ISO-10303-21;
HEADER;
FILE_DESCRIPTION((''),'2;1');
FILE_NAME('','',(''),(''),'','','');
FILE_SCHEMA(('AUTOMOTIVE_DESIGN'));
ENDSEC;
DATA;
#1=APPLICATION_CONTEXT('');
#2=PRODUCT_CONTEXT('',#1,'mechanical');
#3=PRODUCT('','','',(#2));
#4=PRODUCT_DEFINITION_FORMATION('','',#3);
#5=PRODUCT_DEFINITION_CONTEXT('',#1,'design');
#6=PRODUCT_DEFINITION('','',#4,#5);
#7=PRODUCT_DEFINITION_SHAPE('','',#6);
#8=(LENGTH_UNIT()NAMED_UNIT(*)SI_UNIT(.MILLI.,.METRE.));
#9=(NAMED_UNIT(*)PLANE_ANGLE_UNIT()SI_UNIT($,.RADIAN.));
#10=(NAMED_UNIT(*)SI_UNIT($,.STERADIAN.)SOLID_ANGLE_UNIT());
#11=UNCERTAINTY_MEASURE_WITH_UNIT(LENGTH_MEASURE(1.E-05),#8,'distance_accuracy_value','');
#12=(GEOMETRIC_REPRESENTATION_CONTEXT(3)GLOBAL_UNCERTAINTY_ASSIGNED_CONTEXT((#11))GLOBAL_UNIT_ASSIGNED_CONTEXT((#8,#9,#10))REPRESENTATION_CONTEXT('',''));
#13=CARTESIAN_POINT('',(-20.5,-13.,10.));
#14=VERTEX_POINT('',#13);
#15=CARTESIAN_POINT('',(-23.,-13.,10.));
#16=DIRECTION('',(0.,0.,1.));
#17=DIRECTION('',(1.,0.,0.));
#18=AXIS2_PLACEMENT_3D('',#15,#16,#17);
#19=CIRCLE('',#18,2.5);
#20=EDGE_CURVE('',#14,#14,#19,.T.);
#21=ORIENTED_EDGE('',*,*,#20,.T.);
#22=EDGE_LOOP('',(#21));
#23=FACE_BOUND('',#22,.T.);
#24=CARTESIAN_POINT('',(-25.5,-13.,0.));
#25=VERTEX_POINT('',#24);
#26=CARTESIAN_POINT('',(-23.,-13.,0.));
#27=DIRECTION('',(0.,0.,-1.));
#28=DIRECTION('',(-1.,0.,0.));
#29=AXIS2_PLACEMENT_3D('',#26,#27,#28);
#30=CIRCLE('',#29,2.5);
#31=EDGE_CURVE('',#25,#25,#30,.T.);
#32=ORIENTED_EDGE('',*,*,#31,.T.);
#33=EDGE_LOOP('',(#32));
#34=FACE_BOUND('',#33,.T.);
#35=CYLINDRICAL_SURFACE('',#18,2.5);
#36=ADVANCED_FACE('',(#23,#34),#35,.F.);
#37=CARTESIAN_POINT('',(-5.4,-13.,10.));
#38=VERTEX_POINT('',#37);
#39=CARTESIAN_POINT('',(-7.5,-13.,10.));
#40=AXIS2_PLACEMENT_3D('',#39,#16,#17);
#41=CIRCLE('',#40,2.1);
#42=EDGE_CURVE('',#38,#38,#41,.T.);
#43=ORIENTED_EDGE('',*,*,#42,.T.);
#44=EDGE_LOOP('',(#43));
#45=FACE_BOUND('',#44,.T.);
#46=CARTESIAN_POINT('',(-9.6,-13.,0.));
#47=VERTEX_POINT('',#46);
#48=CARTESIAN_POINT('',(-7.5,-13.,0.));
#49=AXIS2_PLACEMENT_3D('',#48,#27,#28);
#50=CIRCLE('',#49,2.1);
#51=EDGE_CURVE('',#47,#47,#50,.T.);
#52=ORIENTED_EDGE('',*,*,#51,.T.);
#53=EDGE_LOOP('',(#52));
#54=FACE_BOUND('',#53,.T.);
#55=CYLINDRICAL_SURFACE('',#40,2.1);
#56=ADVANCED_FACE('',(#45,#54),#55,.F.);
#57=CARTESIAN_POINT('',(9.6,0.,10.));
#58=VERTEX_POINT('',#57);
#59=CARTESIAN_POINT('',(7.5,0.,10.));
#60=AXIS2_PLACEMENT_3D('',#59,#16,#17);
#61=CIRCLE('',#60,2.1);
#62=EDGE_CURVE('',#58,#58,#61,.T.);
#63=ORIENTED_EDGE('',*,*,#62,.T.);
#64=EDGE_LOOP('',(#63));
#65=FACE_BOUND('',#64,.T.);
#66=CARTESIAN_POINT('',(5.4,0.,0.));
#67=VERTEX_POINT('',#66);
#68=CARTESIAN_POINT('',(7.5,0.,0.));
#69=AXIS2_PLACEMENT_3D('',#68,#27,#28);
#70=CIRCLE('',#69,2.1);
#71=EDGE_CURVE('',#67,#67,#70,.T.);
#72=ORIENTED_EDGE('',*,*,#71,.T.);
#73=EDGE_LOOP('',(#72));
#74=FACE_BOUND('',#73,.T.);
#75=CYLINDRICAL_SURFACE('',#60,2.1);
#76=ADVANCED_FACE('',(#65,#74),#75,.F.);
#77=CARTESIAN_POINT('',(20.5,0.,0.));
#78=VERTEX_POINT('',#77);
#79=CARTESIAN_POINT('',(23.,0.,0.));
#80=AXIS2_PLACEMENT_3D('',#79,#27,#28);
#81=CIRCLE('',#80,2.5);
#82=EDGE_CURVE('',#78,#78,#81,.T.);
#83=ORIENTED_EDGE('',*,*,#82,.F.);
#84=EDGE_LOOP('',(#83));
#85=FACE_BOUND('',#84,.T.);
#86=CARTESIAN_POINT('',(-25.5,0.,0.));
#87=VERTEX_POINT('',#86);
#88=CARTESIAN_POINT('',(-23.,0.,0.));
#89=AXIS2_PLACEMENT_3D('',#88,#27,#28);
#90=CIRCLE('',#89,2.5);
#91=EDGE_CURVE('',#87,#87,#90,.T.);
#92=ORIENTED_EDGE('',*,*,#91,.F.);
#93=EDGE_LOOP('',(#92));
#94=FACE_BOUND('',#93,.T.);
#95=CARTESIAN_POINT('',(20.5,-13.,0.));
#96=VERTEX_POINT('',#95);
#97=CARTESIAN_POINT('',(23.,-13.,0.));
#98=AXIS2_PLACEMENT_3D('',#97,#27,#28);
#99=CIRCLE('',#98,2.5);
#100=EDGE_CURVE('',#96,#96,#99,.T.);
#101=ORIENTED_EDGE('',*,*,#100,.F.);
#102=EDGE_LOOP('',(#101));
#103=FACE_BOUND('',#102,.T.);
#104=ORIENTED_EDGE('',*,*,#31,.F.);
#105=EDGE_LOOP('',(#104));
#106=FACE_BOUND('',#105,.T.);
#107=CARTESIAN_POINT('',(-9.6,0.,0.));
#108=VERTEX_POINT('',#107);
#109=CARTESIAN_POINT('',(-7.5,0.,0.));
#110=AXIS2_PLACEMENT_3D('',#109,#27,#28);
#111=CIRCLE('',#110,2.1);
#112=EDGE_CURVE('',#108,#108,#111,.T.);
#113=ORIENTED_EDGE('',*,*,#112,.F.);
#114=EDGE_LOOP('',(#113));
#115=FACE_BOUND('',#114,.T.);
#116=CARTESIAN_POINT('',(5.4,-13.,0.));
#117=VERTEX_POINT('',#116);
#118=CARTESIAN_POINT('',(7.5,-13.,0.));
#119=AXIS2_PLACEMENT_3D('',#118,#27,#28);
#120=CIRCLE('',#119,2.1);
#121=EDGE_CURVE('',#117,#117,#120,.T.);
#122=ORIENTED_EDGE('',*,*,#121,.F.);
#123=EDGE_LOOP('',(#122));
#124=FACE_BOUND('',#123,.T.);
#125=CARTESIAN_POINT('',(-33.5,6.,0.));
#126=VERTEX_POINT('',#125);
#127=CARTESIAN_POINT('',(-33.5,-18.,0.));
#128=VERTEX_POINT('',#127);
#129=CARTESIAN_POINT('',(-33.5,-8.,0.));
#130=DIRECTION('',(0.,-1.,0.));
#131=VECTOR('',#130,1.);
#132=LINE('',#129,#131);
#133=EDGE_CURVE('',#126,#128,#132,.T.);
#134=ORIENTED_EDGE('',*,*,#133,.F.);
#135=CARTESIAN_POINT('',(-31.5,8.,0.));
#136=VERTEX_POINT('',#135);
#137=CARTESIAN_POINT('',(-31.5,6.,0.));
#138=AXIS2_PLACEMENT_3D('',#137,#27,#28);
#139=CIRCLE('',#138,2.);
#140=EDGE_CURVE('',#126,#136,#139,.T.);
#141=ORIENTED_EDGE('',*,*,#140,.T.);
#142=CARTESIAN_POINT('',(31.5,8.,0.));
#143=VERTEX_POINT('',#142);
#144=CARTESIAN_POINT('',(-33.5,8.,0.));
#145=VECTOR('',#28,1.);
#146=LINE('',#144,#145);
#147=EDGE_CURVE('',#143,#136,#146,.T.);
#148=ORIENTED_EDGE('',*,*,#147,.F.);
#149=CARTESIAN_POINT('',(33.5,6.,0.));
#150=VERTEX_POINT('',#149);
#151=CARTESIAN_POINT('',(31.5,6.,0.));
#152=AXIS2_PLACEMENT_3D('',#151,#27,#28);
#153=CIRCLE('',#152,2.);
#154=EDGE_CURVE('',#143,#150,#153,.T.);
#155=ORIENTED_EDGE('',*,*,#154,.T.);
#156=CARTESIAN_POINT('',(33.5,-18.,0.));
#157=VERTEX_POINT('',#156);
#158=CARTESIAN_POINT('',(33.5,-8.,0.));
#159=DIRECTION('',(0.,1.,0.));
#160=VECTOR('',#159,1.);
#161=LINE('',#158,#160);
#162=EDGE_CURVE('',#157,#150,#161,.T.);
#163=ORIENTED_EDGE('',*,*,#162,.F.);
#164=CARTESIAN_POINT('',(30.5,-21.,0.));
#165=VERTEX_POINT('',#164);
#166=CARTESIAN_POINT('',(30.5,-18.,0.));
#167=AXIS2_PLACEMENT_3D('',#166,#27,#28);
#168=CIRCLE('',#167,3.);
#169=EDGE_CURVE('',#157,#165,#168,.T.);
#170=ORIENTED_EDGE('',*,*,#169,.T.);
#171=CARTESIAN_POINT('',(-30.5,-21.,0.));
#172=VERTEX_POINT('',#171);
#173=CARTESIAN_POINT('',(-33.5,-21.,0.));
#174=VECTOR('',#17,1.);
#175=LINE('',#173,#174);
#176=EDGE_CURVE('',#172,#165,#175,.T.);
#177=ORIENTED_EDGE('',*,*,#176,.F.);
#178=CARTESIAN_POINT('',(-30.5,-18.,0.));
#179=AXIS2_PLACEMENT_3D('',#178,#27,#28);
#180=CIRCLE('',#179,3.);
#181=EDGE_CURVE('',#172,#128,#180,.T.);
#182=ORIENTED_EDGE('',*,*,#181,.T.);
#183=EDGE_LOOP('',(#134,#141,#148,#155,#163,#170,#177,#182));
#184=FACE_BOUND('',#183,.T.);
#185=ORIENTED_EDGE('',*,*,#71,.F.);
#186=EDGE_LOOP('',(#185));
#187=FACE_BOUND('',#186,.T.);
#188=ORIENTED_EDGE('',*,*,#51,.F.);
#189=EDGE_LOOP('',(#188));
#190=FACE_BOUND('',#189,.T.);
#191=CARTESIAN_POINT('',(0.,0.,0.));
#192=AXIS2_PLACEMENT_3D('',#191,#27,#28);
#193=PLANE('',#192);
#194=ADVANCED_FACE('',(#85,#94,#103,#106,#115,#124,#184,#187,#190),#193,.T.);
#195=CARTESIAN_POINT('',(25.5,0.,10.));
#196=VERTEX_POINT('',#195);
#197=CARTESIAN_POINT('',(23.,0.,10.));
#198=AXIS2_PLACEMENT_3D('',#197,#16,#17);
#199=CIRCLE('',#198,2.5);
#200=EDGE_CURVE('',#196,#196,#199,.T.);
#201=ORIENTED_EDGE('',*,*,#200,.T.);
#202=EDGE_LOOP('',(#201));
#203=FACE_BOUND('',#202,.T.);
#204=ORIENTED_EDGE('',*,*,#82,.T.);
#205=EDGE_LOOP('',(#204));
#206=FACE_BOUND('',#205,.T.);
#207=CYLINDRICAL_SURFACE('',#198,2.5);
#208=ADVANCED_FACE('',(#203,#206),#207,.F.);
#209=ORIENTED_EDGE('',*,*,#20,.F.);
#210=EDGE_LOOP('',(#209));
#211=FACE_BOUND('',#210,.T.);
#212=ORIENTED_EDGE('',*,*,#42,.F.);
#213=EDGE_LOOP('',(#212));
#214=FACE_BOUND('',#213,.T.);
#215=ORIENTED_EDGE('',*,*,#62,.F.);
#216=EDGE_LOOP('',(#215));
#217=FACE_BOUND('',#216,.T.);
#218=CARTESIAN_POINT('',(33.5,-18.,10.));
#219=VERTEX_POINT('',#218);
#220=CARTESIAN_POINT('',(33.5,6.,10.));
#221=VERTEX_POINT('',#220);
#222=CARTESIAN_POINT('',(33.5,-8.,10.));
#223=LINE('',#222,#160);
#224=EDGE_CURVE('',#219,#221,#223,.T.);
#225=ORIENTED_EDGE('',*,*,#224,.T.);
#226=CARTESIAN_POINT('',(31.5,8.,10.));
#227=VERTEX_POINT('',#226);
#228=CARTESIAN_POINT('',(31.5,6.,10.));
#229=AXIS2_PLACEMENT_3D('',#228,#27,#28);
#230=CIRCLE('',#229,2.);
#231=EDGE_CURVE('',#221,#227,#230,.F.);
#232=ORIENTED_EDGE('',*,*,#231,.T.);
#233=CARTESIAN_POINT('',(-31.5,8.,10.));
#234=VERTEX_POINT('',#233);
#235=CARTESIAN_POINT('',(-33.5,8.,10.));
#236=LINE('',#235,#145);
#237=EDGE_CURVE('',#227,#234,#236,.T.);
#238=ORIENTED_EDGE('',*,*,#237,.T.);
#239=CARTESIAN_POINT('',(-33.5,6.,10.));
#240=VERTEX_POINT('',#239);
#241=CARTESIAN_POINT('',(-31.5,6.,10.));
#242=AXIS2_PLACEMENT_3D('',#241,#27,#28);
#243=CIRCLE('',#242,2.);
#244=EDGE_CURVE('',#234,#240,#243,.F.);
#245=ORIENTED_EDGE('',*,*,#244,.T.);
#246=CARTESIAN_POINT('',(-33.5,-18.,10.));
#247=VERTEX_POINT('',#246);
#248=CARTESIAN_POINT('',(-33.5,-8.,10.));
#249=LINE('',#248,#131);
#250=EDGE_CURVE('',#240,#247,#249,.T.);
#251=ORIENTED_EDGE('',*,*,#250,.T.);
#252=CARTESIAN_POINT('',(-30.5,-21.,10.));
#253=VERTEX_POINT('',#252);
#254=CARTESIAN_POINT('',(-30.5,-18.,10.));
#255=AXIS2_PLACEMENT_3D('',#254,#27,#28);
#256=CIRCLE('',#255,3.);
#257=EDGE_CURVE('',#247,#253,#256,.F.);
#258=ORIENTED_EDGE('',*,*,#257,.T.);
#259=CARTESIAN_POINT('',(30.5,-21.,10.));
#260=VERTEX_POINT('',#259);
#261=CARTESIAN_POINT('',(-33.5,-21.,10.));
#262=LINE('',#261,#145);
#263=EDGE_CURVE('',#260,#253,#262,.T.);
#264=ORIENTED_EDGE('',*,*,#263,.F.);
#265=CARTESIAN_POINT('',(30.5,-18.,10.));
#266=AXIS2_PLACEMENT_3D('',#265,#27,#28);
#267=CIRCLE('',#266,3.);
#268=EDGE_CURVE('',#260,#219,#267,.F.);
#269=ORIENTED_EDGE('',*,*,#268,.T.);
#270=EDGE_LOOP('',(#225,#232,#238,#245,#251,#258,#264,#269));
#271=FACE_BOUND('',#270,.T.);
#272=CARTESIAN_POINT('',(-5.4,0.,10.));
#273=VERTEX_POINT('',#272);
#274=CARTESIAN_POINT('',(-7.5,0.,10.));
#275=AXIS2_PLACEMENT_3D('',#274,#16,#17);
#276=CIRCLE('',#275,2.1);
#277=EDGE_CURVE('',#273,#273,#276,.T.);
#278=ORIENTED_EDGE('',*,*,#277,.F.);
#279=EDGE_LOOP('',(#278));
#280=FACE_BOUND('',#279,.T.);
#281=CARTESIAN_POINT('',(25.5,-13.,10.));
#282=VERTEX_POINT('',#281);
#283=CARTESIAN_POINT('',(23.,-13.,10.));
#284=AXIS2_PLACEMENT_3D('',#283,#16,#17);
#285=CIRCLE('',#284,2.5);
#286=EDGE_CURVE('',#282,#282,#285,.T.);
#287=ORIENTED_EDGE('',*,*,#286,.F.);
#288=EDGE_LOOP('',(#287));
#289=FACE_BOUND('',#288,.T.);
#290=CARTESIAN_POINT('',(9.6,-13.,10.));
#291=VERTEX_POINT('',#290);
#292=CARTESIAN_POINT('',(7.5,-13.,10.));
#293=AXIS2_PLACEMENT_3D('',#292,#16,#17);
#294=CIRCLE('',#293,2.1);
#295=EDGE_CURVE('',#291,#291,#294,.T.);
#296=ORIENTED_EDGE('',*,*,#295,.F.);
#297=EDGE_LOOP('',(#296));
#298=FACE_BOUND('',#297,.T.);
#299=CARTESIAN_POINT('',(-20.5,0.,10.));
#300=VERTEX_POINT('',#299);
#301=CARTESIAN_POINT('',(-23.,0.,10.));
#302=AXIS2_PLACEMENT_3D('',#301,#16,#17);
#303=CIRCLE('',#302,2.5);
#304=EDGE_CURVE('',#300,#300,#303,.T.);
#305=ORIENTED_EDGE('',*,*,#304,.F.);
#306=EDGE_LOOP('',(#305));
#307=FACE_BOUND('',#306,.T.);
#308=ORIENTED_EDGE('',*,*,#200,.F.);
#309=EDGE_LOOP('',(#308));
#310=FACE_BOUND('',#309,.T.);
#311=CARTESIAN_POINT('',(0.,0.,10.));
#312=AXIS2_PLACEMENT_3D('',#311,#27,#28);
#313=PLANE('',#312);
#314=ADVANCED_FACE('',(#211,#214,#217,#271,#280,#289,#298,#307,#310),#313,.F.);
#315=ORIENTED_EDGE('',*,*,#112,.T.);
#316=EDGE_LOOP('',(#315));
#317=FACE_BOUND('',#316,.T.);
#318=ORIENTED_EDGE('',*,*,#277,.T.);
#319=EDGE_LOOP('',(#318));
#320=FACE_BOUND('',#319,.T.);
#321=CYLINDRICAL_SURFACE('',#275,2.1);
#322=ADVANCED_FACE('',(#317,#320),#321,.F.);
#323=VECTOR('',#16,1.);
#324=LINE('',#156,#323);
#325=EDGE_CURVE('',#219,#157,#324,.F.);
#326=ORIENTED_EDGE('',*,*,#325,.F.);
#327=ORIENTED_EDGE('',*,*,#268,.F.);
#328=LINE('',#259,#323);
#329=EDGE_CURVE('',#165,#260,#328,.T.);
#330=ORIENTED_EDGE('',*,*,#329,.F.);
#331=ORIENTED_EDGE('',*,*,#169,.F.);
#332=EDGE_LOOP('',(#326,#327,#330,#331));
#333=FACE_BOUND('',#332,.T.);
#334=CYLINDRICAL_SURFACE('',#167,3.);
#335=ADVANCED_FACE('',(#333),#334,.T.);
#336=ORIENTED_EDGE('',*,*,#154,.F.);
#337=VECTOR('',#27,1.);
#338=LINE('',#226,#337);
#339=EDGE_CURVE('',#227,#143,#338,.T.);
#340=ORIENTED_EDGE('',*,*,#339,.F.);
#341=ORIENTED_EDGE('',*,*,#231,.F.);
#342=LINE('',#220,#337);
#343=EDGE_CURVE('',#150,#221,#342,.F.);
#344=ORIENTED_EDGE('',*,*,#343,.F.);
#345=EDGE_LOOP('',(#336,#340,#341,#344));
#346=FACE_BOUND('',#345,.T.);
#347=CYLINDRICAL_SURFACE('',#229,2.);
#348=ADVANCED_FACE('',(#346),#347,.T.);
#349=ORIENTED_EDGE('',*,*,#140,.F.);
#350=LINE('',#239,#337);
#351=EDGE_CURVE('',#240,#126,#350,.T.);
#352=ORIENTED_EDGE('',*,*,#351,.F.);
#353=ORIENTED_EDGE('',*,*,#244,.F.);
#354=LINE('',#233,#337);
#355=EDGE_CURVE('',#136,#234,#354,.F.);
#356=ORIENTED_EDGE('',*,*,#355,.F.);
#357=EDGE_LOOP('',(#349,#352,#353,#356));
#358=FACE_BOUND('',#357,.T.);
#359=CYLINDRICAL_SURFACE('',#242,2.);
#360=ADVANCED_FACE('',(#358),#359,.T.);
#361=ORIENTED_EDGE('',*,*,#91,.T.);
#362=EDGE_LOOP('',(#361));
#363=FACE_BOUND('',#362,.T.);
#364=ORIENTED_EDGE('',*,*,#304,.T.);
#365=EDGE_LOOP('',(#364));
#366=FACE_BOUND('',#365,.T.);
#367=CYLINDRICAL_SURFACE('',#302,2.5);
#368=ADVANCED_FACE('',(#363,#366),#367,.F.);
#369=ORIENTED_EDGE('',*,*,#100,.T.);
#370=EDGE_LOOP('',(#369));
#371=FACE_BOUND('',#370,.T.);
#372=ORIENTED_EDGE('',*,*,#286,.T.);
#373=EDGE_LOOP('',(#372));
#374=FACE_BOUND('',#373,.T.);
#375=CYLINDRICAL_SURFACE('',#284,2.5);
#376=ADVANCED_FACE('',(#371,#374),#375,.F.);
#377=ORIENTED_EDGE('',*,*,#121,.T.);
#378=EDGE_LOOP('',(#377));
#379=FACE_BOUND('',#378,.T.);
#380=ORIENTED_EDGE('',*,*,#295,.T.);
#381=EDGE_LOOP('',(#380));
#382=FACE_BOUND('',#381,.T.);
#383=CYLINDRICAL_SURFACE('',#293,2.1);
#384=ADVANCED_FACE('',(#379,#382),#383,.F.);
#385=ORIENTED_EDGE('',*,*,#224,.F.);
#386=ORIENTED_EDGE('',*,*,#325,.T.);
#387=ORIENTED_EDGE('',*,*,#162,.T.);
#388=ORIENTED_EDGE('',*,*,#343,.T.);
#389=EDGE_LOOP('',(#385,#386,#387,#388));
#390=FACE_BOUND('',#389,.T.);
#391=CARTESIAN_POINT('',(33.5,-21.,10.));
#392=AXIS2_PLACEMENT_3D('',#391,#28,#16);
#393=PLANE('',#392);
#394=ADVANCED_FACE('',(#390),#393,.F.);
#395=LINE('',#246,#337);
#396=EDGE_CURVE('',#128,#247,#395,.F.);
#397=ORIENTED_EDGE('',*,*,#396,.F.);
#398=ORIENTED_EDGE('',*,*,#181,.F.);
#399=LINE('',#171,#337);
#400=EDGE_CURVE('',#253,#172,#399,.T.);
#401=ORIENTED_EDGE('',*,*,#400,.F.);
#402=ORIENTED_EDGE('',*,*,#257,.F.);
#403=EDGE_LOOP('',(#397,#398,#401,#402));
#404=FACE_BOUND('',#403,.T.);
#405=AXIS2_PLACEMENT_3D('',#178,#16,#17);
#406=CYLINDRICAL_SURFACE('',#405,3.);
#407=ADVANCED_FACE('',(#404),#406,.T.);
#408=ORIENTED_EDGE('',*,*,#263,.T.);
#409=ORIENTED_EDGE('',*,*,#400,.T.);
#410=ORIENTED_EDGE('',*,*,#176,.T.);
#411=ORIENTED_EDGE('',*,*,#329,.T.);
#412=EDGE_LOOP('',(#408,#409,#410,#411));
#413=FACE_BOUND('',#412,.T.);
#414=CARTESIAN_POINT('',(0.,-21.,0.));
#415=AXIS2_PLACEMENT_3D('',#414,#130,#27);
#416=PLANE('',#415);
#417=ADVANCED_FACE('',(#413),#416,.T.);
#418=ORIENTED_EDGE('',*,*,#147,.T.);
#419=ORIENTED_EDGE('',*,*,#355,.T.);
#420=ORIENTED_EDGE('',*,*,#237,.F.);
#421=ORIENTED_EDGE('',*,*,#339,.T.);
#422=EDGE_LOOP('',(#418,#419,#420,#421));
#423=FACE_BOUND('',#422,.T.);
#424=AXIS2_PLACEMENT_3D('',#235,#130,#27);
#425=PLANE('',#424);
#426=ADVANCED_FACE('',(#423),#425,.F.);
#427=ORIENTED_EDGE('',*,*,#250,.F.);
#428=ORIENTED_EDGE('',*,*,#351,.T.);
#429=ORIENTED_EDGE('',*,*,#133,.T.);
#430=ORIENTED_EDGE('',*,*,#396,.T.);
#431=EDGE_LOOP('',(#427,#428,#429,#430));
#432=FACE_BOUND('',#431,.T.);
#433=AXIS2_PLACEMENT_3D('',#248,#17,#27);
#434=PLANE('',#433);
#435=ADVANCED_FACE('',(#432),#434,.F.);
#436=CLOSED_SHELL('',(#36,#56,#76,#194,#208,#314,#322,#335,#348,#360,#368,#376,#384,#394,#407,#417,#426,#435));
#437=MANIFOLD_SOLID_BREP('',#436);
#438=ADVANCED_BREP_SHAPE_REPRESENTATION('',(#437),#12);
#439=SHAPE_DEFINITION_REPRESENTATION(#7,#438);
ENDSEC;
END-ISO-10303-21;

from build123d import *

# Parameters (mm, degrees)
SKETCH_1_W                  = 67
SKETCH_1_H                  = 16
EXTRUDE_1_DEPTH             = 10
HOLE_WIZARD_M5_1_AT_2_COUNT = 2
HOLE_WIZARD_M5_1_AT_2_PITCH = 15
HOLE_WIZARD_M6_1_AT_2_COUNT = 2
HOLE_WIZARD_M6_1_AT_2_PITCH = 46
FILLET_1_R                  = 2
SKETCH_8_W                  = 67
SKETCH_8_H                  = 10
EXTRUDE_2_DEPTH             = 13
DELETE_START                = -33.5
DELETE_FACE_1_OUTLINE_W     = 27
DELETE_FACE_1_OUTLINE_H     = 10
DELETE_FACE_1_DEPTH         = 2.5
DELETE_START_2              = 31
DELETE_FACE_2_OUTLINE_W     = 27
DELETE_FACE_2_OUTLINE_H     = 10
DELETE_FACE_2_DEPTH         = 2.5
FILLET_2_R                  = 3


with BuildPart() as part:
    # 草图1 → 凸台-拉伸1 (new body)
    with BuildSketch(Plane.XY):
        Rectangle(SKETCH_1_W, SKETCH_1_H)
    extrude(amount=EXTRUDE_1_DEPTH)

    # 草图4 → M5 螺纹孔1 (revolve, cut)
    with BuildSketch(Plane(origin=(-7.5, 0, 10), x_dir=(0, -1, 0), z_dir=(1, 0, 0))):
        Polygon((0, 0), (0, 13.6618073), (2.1, 12.4), (2.1, 0), align=None)
    hole_wizard_m5_1 = revolve(axis=Axis((-7.5, 0, 16.35), (0, 0, -1)), mode=Mode.SUBTRACT)

    # M5 螺纹孔1 at 2: M5 螺纹孔1 ×2
    with Locations(*[(i * HOLE_WIZARD_M5_1_AT_2_PITCH, 0, 0) for i in range(1, HOLE_WIZARD_M5_1_AT_2_COUNT)]):
        add(hole_wizard_m5_1, mode=Mode.SUBTRACT)

    # 草图7 → M6 螺纹孔1 (revolve, cut)
    with BuildSketch(Plane(origin=(-23, 0, 10), x_dir=(0, -1, 0), z_dir=(1, 0, 0))):
        Polygon((0, 0), (0, 16.502151548), (2.5, 15), (2.5, 0), align=None)
    hole_wizard_m6_1 = revolve(axis=Axis((-23, 0, 16.35), (0, 0, -1)), mode=Mode.SUBTRACT)

    # M6 螺纹孔1 at 2: M6 螺纹孔1 ×2
    with Locations(*[(i * HOLE_WIZARD_M6_1_AT_2_PITCH, 0, 0) for i in range(1, HOLE_WIZARD_M6_1_AT_2_COUNT)]):
        add(hole_wizard_m6_1, mode=Mode.SUBTRACT)

    # 圆角1
    fillet_1_edges = [part.edges().sort_by_distance(p)[0] for p in [
        (33.5, -8, 5),
        (-33.5, -8, 5),
        (-33.5, 8, 5),
        (33.5, 8, 5),
    ]]
    fillet(fillet_1_edges, radius=FILLET_1_R)

    # 草图8 → 凸台-拉伸2 (add)
    with BuildSketch(Plane.XZ.offset(8)):
        with Locations((0, 5)):
            Rectangle(SKETCH_8_W, SKETCH_8_H)
    extrude(amount=EXTRUDE_2_DEPTH)

    # Delete Face 1: read off the stored shape, not the designer's step
    # Delete Face 1 outline → Delete Face 1 (add)
    with BuildSketch(Plane.YZ.offset(DELETE_START)):
        with Locations((-7.5, 5)):
            Rectangle(DELETE_FACE_1_OUTLINE_W, DELETE_FACE_1_OUTLINE_H)
    extrude(amount=DELETE_FACE_1_DEPTH)

    # Delete Face 2: read off the stored shape, not the designer's step
    # Delete Face 2 outline → Delete Face 2 (add)
    with BuildSketch(Plane.YZ.offset(DELETE_START_2)):
        with Locations((-7.5, 5)):
            Rectangle(DELETE_FACE_2_OUTLINE_W, DELETE_FACE_2_OUTLINE_H)
    extrude(amount=DELETE_FACE_2_DEPTH)

    # 镜向1: M5 螺纹孔1, M6 螺纹孔1 across plane
    add(hole_wizard_m5_1.mirror(Plane(origin=(0, -6.5, 0), x_dir=(0, 0, 1), z_dir=(0, -1, 0))), mode=Mode.SUBTRACT)
    add(hole_wizard_m6_1.mirror(Plane(origin=(0, -6.5, 0), x_dir=(0, 0, 1), z_dir=(0, -1, 0))), mode=Mode.SUBTRACT)

    # 镜向1 copy 1 sketch → 镜向1 copy 1 (revolve, cut)
    with BuildSketch(Plane(origin=(7.5, -13, 10), x_dir=(0, 1, 0), z_dir=(1, 0, 0))):
        Polygon((0, 0), (0, -13.6618073), (2.1, -12.4), (2.1, 0), align=None)
    revolve(axis=Axis((7.5, -13, 16.35), (0, 0, 1)), mode=Mode.SUBTRACT)

    # 镜向1 copy 2 sketch → 镜向1 copy 2 (revolve, cut)
    with BuildSketch(Plane(origin=(23, -13, 10), x_dir=(0, 1, 0), z_dir=(1, 0, 0))):
        Polygon((0, 0), (0, -16.502151548), (2.5, -15), (2.5, 0), align=None)
    revolve(axis=Axis((23, -13, 16.35), (0, 0, 1)), mode=Mode.SUBTRACT)

    # 圆角2
    fillet_2_edges = [part.edges().sort_by_distance(p)[0] for p in [
        (-33.5, -21, 5),
        (33.5, -21, 5),
    ]]
    fillet(fillet_2_edges, radius=FILLET_2_R)


solid = part.part
